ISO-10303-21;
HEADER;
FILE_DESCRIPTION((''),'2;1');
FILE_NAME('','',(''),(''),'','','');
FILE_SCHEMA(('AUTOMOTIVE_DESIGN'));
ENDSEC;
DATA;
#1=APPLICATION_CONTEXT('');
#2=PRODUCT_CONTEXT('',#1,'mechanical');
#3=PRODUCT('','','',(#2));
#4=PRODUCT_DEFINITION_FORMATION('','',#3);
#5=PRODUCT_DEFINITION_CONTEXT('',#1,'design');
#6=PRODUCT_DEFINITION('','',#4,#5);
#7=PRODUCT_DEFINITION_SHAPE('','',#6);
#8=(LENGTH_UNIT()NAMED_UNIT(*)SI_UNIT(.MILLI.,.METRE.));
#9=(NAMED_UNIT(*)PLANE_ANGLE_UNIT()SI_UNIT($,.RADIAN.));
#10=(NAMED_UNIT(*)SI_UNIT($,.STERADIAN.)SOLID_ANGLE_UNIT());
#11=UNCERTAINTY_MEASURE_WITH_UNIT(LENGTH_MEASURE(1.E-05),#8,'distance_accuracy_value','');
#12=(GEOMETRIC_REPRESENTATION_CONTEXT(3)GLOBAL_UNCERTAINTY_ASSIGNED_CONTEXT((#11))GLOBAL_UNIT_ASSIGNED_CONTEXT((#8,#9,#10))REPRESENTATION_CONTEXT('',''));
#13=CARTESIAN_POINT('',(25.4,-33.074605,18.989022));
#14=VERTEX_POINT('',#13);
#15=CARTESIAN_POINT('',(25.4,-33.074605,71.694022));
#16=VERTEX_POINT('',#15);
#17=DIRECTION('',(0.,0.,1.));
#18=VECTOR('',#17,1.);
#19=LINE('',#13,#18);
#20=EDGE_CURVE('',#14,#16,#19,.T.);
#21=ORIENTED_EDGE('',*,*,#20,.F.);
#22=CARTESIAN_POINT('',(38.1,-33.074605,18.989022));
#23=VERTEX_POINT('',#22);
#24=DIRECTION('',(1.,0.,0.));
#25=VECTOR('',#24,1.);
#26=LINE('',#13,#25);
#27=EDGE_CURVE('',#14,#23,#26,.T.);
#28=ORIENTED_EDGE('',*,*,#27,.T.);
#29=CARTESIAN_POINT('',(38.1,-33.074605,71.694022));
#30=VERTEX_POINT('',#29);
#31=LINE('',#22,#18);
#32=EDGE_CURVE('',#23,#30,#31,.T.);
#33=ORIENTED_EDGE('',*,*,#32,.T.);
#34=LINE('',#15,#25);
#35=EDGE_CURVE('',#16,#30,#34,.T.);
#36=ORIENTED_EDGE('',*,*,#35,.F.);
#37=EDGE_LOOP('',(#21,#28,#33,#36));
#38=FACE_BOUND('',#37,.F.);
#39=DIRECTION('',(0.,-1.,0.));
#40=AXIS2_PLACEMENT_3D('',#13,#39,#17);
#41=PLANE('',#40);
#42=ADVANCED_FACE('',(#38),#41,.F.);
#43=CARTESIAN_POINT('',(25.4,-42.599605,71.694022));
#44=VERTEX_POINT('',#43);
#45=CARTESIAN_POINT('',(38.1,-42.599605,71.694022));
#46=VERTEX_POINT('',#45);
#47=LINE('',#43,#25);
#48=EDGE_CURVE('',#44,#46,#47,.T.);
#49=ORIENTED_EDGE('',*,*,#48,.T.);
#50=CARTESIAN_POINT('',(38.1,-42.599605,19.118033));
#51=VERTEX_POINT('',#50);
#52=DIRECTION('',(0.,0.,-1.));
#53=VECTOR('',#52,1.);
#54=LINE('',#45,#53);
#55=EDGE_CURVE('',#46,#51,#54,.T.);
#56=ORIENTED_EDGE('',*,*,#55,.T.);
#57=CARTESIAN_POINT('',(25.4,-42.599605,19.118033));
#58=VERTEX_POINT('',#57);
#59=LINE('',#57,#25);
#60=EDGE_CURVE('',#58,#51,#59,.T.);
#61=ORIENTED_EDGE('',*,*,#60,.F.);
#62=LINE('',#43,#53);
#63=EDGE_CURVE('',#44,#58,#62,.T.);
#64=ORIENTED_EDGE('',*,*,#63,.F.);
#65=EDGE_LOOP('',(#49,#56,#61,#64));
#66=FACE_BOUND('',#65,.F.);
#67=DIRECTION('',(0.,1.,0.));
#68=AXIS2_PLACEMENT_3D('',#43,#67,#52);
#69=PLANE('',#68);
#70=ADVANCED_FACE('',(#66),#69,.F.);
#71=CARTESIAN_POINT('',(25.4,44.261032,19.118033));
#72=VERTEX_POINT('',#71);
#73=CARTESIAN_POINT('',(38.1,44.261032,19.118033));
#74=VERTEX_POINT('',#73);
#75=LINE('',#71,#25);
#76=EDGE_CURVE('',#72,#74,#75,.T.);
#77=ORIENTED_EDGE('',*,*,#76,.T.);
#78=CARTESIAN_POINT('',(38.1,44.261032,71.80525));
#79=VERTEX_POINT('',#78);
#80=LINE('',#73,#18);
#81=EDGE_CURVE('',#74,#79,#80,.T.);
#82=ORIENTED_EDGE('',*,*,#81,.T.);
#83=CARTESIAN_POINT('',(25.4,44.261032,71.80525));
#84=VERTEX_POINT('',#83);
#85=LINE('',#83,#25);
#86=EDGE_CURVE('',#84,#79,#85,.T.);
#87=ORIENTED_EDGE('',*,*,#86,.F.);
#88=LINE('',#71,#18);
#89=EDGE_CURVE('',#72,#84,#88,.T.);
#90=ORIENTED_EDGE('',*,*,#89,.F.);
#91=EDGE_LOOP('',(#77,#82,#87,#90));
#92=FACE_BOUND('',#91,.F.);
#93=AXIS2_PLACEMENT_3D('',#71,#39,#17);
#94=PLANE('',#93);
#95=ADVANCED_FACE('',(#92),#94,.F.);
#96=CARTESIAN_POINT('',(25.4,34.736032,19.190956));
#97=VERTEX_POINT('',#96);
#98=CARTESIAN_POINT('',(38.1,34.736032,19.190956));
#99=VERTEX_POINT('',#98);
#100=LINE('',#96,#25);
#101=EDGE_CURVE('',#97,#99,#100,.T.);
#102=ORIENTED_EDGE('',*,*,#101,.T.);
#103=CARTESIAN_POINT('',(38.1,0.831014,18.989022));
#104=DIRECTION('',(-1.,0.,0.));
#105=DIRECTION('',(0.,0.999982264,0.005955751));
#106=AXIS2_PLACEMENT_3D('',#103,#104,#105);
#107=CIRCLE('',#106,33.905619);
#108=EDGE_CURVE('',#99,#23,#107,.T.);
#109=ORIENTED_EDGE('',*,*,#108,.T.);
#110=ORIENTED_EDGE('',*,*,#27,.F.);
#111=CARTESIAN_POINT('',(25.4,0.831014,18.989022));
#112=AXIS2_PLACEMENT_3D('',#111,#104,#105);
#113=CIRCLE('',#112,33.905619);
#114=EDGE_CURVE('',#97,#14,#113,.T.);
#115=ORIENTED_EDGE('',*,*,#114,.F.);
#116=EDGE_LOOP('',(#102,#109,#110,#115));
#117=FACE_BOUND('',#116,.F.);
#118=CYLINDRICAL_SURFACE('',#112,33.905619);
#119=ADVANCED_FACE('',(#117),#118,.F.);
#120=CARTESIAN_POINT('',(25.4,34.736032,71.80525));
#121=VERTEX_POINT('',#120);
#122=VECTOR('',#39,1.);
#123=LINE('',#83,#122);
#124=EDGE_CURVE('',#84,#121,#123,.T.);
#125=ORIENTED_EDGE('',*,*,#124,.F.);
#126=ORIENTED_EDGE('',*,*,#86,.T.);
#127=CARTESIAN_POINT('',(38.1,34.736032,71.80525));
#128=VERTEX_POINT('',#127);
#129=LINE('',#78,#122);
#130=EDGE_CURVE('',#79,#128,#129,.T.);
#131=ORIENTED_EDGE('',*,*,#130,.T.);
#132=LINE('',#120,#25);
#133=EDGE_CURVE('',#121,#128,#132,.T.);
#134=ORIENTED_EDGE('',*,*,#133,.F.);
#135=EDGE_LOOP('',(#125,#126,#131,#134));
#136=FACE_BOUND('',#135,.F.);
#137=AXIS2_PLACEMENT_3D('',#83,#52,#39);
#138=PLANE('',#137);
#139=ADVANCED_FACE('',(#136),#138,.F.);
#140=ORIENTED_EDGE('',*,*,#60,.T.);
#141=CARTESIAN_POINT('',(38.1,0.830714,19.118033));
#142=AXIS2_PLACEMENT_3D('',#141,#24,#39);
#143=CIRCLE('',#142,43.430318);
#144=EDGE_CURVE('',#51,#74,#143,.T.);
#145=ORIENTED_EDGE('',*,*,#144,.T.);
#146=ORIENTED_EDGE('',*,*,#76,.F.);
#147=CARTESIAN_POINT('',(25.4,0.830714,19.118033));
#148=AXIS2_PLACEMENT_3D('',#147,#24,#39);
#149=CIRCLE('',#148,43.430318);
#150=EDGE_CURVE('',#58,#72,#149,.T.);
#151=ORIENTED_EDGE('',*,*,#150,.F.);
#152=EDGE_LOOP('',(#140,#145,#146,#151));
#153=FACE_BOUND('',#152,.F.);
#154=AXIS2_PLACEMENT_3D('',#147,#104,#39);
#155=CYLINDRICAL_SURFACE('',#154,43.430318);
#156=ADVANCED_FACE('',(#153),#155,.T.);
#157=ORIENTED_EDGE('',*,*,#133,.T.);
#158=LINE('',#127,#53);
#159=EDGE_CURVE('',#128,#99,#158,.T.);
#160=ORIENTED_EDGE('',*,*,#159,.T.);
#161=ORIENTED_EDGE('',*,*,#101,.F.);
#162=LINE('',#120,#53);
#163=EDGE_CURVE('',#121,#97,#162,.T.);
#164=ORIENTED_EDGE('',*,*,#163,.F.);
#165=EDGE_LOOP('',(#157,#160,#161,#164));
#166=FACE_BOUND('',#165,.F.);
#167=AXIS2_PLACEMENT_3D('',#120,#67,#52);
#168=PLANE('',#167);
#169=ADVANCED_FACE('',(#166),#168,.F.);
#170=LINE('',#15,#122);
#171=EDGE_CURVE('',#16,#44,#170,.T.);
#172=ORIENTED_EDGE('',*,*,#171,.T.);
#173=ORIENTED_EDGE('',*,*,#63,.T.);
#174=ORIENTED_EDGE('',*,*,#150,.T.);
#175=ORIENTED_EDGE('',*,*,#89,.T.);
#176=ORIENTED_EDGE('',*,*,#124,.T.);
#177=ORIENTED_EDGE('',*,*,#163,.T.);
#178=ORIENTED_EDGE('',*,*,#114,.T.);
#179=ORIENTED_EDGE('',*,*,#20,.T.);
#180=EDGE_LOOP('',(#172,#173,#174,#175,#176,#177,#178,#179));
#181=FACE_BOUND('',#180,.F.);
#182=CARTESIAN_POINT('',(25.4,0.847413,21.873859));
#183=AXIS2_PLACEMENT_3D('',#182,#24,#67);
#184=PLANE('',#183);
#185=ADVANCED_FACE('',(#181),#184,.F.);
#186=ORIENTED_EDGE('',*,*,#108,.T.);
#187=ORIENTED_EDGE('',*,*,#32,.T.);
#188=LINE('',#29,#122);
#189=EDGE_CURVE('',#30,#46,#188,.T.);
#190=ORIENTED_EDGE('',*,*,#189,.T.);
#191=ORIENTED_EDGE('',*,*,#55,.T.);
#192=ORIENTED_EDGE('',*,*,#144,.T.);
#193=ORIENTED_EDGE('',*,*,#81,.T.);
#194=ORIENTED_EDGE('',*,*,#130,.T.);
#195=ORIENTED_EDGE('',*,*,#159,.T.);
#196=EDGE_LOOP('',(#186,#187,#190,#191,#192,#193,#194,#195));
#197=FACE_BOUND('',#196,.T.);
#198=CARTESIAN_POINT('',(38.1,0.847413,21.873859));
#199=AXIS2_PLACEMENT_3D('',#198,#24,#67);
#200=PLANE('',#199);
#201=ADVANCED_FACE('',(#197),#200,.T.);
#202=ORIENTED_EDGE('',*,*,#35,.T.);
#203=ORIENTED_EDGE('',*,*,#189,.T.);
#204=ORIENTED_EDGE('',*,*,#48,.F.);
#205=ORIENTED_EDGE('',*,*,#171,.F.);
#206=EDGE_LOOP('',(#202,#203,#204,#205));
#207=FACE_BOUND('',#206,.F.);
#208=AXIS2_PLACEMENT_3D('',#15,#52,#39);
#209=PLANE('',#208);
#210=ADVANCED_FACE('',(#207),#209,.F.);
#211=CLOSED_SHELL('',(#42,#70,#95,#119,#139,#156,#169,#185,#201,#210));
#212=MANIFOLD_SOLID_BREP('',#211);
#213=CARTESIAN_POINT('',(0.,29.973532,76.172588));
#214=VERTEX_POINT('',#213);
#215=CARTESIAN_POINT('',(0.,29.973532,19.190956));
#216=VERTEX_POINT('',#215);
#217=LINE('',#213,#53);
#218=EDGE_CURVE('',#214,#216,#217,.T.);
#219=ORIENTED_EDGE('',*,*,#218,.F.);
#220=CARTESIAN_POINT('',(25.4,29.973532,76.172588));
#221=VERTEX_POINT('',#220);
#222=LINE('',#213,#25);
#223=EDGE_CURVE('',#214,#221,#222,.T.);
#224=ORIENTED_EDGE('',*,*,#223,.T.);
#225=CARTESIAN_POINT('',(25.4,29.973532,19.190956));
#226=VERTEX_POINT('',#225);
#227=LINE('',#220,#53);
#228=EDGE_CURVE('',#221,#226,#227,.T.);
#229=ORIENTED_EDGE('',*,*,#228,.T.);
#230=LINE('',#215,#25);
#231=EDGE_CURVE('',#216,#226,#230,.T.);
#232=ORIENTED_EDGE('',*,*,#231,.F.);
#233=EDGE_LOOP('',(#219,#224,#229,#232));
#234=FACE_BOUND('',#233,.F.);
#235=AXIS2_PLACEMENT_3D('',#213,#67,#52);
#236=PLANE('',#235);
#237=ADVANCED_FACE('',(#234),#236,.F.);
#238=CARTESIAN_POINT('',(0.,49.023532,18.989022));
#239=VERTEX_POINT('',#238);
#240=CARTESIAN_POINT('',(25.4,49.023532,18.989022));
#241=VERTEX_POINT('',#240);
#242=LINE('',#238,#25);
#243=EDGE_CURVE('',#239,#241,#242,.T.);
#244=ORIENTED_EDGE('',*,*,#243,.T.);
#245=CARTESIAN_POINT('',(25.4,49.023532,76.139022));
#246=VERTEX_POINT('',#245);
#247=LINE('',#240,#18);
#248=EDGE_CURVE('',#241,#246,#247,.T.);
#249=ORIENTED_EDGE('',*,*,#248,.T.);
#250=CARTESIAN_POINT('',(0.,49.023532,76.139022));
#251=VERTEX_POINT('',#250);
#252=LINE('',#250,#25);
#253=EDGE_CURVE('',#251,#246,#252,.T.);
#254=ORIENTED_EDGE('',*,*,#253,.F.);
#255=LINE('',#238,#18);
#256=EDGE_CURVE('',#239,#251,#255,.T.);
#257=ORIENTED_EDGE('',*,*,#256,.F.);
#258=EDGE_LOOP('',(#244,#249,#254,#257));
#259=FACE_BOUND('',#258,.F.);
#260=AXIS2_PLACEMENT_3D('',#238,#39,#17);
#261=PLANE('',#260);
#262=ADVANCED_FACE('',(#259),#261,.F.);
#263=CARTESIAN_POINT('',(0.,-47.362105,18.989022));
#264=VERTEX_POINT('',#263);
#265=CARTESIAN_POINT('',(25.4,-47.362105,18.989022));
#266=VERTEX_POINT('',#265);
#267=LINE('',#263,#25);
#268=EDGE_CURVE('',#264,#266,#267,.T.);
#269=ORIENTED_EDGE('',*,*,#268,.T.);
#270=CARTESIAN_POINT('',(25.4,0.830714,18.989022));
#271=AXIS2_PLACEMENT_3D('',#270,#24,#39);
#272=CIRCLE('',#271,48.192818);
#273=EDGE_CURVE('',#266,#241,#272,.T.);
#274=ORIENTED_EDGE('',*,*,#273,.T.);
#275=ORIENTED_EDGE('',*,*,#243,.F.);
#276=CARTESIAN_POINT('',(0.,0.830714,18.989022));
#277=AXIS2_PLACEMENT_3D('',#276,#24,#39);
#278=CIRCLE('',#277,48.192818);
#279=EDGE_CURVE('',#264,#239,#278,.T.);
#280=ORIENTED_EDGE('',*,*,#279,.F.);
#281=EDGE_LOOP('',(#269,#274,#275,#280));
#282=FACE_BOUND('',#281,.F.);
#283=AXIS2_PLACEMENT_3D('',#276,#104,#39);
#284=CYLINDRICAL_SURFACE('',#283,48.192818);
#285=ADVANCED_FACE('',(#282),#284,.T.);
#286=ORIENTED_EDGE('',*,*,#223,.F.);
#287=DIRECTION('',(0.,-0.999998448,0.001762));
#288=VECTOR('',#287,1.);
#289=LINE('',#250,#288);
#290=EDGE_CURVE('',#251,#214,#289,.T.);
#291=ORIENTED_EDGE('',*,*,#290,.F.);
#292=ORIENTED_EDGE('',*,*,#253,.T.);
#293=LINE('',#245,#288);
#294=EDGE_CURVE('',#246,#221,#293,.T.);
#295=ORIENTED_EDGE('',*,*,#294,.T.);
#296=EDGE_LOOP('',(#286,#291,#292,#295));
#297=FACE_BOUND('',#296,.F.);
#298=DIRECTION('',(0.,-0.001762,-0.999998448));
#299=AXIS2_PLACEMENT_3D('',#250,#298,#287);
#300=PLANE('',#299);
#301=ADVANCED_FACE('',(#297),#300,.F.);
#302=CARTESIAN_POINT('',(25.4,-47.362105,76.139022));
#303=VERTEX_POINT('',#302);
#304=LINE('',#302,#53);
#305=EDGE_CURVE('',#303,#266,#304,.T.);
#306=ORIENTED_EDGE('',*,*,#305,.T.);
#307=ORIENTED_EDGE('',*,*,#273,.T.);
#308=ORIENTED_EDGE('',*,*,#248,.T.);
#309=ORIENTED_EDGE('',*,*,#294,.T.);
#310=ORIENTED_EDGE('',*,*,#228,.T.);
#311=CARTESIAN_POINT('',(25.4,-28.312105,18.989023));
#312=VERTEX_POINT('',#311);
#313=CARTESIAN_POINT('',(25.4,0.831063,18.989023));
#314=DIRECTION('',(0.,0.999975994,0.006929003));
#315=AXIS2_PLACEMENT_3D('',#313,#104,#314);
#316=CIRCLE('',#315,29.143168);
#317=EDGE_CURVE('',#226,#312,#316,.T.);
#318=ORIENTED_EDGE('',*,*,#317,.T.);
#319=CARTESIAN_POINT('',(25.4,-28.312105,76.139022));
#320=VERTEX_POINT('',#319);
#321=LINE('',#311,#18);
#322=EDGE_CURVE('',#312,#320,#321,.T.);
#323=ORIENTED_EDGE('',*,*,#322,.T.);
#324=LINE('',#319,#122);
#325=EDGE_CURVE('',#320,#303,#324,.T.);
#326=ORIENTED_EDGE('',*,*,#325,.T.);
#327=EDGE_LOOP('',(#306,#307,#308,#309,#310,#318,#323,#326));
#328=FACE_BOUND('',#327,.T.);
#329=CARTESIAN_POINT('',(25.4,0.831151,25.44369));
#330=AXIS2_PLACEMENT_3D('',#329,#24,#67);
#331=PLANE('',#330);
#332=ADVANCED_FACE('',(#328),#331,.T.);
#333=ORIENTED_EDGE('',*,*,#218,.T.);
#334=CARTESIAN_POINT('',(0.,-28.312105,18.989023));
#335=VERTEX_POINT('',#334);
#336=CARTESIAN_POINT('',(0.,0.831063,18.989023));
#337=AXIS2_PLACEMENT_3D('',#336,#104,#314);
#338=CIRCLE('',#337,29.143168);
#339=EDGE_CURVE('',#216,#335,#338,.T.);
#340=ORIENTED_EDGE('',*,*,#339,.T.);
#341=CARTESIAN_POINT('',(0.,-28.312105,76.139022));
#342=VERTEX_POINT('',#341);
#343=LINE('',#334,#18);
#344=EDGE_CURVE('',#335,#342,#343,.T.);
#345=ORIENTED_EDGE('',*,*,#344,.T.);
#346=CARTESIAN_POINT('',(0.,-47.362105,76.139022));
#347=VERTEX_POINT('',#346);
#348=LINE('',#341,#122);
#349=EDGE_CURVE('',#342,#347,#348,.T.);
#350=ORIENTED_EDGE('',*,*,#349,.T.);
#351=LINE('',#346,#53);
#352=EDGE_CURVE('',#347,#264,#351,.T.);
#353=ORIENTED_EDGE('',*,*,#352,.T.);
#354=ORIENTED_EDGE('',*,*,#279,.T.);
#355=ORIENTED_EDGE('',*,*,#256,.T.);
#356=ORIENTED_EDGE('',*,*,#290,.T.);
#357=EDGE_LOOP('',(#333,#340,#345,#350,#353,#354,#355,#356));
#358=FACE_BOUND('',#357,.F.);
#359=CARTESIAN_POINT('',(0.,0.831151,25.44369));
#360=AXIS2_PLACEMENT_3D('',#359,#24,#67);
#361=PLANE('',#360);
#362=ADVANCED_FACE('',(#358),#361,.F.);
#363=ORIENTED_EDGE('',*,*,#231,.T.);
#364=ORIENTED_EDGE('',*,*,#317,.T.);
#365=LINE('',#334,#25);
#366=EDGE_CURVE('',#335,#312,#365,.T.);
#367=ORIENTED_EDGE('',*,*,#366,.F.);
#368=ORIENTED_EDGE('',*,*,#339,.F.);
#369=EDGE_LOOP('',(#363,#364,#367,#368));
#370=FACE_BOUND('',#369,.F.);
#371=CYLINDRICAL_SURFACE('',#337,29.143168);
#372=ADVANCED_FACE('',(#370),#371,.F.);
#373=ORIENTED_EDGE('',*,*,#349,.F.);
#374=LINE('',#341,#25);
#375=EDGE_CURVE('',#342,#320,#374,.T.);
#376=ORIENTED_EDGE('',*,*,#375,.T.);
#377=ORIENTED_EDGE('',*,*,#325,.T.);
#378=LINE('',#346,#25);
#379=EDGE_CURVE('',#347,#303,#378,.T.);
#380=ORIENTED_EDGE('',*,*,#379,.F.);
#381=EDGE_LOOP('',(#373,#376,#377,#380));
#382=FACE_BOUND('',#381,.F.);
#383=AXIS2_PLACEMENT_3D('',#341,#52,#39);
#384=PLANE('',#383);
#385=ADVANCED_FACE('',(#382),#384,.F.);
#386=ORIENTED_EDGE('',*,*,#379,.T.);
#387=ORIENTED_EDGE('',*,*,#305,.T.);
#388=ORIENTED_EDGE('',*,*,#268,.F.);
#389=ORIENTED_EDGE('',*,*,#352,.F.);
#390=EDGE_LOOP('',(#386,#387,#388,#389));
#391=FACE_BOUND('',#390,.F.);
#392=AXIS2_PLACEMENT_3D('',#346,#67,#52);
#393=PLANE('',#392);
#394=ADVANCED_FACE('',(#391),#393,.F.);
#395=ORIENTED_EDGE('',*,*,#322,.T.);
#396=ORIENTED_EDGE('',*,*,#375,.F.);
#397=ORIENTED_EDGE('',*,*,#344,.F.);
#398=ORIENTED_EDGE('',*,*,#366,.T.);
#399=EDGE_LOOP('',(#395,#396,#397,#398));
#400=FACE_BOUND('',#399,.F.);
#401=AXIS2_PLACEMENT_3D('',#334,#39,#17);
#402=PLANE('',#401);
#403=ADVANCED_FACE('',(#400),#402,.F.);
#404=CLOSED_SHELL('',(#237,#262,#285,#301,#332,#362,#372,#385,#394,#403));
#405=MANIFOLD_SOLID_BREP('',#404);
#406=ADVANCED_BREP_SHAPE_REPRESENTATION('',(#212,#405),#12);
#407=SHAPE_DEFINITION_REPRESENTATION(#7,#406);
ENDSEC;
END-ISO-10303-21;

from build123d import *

# Parameters (mm, degrees)
F1_DEPTH = 25.4
F3_DEPTH = 12.7


# Not quite as in the source:
# - ends of sketch curves that miss each other by under 0.0002 mm in the source are joined


with BuildPart() as f1:
    # F0 (on Right) → F1 (new body)
    with BuildSketch(Plane.YZ):
        with BuildLine():
            Line((-28.3121045191, 76.1390224734), (-47.3621045191, 76.1390224734))
            Line((-47.3621045191, 76.1390224734), (-47.3621045191, 18.9890224734))
            ThreePointArc((-47.3621045191, 18.9890224734), (0.8307135418, -29.2037957052), (49.0235318381, 18.9890222381))
            Line((49.0235318381, 18.9890222381), (49.0235318381, 76.1390222381))
            Line((49.0235318381, 76.1390222381), (29.9735318381, 76.1725883931))
            Line((29.9735318381, 76.1725883931), (29.9735318381, 19.1909559071))
            ThreePointArc((29.9735318381, 19.1909559071), (0.9320306114, -10.1539702583), (-28.3121045191, 18.9890228212))
            Line((-28.3121045191, 18.9890228212), (-28.3121045191, 76.1390224734))
        make_face()
    extrude(amount=F1_DEPTH)


with BuildPart() as f3:
    # F2 (on face) → F3 (new body)
    with BuildSketch(Plane.YZ.offset(25.4)):
        with BuildLine():
            Line((-33.0746045191, 71.6940224734), (-42.5996045191, 71.6940224734))
            Line((-42.5996045191, 71.6940224734), (-42.5996045191, 19.1180334417))
            ThreePointArc((-42.5996045191, 19.1180334417), (0.8307136595, -24.3122847369), (44.2610318381, 19.1180334417))
            Line((44.2610318381, 19.1180334417), (44.2610318381, 71.8052499411))
            Line((44.2610318381, 71.8052499411), (34.7360318381, 71.8052499411))
            Line((34.7360318381, 71.8052499411), (34.7360318381, 19.1909559071))
            ThreePointArc((34.7360318381, 19.1909559071), (0.931981493, -14.9164460393), (-33.0746045191, 18.9890224734))
            Line((-33.0746045191, 18.9890224734), (-33.0746045191, 71.6940224734))
        make_face()
    extrude(amount=F3_DEPTH)


solid = Compound([f1.part, f3.part])
